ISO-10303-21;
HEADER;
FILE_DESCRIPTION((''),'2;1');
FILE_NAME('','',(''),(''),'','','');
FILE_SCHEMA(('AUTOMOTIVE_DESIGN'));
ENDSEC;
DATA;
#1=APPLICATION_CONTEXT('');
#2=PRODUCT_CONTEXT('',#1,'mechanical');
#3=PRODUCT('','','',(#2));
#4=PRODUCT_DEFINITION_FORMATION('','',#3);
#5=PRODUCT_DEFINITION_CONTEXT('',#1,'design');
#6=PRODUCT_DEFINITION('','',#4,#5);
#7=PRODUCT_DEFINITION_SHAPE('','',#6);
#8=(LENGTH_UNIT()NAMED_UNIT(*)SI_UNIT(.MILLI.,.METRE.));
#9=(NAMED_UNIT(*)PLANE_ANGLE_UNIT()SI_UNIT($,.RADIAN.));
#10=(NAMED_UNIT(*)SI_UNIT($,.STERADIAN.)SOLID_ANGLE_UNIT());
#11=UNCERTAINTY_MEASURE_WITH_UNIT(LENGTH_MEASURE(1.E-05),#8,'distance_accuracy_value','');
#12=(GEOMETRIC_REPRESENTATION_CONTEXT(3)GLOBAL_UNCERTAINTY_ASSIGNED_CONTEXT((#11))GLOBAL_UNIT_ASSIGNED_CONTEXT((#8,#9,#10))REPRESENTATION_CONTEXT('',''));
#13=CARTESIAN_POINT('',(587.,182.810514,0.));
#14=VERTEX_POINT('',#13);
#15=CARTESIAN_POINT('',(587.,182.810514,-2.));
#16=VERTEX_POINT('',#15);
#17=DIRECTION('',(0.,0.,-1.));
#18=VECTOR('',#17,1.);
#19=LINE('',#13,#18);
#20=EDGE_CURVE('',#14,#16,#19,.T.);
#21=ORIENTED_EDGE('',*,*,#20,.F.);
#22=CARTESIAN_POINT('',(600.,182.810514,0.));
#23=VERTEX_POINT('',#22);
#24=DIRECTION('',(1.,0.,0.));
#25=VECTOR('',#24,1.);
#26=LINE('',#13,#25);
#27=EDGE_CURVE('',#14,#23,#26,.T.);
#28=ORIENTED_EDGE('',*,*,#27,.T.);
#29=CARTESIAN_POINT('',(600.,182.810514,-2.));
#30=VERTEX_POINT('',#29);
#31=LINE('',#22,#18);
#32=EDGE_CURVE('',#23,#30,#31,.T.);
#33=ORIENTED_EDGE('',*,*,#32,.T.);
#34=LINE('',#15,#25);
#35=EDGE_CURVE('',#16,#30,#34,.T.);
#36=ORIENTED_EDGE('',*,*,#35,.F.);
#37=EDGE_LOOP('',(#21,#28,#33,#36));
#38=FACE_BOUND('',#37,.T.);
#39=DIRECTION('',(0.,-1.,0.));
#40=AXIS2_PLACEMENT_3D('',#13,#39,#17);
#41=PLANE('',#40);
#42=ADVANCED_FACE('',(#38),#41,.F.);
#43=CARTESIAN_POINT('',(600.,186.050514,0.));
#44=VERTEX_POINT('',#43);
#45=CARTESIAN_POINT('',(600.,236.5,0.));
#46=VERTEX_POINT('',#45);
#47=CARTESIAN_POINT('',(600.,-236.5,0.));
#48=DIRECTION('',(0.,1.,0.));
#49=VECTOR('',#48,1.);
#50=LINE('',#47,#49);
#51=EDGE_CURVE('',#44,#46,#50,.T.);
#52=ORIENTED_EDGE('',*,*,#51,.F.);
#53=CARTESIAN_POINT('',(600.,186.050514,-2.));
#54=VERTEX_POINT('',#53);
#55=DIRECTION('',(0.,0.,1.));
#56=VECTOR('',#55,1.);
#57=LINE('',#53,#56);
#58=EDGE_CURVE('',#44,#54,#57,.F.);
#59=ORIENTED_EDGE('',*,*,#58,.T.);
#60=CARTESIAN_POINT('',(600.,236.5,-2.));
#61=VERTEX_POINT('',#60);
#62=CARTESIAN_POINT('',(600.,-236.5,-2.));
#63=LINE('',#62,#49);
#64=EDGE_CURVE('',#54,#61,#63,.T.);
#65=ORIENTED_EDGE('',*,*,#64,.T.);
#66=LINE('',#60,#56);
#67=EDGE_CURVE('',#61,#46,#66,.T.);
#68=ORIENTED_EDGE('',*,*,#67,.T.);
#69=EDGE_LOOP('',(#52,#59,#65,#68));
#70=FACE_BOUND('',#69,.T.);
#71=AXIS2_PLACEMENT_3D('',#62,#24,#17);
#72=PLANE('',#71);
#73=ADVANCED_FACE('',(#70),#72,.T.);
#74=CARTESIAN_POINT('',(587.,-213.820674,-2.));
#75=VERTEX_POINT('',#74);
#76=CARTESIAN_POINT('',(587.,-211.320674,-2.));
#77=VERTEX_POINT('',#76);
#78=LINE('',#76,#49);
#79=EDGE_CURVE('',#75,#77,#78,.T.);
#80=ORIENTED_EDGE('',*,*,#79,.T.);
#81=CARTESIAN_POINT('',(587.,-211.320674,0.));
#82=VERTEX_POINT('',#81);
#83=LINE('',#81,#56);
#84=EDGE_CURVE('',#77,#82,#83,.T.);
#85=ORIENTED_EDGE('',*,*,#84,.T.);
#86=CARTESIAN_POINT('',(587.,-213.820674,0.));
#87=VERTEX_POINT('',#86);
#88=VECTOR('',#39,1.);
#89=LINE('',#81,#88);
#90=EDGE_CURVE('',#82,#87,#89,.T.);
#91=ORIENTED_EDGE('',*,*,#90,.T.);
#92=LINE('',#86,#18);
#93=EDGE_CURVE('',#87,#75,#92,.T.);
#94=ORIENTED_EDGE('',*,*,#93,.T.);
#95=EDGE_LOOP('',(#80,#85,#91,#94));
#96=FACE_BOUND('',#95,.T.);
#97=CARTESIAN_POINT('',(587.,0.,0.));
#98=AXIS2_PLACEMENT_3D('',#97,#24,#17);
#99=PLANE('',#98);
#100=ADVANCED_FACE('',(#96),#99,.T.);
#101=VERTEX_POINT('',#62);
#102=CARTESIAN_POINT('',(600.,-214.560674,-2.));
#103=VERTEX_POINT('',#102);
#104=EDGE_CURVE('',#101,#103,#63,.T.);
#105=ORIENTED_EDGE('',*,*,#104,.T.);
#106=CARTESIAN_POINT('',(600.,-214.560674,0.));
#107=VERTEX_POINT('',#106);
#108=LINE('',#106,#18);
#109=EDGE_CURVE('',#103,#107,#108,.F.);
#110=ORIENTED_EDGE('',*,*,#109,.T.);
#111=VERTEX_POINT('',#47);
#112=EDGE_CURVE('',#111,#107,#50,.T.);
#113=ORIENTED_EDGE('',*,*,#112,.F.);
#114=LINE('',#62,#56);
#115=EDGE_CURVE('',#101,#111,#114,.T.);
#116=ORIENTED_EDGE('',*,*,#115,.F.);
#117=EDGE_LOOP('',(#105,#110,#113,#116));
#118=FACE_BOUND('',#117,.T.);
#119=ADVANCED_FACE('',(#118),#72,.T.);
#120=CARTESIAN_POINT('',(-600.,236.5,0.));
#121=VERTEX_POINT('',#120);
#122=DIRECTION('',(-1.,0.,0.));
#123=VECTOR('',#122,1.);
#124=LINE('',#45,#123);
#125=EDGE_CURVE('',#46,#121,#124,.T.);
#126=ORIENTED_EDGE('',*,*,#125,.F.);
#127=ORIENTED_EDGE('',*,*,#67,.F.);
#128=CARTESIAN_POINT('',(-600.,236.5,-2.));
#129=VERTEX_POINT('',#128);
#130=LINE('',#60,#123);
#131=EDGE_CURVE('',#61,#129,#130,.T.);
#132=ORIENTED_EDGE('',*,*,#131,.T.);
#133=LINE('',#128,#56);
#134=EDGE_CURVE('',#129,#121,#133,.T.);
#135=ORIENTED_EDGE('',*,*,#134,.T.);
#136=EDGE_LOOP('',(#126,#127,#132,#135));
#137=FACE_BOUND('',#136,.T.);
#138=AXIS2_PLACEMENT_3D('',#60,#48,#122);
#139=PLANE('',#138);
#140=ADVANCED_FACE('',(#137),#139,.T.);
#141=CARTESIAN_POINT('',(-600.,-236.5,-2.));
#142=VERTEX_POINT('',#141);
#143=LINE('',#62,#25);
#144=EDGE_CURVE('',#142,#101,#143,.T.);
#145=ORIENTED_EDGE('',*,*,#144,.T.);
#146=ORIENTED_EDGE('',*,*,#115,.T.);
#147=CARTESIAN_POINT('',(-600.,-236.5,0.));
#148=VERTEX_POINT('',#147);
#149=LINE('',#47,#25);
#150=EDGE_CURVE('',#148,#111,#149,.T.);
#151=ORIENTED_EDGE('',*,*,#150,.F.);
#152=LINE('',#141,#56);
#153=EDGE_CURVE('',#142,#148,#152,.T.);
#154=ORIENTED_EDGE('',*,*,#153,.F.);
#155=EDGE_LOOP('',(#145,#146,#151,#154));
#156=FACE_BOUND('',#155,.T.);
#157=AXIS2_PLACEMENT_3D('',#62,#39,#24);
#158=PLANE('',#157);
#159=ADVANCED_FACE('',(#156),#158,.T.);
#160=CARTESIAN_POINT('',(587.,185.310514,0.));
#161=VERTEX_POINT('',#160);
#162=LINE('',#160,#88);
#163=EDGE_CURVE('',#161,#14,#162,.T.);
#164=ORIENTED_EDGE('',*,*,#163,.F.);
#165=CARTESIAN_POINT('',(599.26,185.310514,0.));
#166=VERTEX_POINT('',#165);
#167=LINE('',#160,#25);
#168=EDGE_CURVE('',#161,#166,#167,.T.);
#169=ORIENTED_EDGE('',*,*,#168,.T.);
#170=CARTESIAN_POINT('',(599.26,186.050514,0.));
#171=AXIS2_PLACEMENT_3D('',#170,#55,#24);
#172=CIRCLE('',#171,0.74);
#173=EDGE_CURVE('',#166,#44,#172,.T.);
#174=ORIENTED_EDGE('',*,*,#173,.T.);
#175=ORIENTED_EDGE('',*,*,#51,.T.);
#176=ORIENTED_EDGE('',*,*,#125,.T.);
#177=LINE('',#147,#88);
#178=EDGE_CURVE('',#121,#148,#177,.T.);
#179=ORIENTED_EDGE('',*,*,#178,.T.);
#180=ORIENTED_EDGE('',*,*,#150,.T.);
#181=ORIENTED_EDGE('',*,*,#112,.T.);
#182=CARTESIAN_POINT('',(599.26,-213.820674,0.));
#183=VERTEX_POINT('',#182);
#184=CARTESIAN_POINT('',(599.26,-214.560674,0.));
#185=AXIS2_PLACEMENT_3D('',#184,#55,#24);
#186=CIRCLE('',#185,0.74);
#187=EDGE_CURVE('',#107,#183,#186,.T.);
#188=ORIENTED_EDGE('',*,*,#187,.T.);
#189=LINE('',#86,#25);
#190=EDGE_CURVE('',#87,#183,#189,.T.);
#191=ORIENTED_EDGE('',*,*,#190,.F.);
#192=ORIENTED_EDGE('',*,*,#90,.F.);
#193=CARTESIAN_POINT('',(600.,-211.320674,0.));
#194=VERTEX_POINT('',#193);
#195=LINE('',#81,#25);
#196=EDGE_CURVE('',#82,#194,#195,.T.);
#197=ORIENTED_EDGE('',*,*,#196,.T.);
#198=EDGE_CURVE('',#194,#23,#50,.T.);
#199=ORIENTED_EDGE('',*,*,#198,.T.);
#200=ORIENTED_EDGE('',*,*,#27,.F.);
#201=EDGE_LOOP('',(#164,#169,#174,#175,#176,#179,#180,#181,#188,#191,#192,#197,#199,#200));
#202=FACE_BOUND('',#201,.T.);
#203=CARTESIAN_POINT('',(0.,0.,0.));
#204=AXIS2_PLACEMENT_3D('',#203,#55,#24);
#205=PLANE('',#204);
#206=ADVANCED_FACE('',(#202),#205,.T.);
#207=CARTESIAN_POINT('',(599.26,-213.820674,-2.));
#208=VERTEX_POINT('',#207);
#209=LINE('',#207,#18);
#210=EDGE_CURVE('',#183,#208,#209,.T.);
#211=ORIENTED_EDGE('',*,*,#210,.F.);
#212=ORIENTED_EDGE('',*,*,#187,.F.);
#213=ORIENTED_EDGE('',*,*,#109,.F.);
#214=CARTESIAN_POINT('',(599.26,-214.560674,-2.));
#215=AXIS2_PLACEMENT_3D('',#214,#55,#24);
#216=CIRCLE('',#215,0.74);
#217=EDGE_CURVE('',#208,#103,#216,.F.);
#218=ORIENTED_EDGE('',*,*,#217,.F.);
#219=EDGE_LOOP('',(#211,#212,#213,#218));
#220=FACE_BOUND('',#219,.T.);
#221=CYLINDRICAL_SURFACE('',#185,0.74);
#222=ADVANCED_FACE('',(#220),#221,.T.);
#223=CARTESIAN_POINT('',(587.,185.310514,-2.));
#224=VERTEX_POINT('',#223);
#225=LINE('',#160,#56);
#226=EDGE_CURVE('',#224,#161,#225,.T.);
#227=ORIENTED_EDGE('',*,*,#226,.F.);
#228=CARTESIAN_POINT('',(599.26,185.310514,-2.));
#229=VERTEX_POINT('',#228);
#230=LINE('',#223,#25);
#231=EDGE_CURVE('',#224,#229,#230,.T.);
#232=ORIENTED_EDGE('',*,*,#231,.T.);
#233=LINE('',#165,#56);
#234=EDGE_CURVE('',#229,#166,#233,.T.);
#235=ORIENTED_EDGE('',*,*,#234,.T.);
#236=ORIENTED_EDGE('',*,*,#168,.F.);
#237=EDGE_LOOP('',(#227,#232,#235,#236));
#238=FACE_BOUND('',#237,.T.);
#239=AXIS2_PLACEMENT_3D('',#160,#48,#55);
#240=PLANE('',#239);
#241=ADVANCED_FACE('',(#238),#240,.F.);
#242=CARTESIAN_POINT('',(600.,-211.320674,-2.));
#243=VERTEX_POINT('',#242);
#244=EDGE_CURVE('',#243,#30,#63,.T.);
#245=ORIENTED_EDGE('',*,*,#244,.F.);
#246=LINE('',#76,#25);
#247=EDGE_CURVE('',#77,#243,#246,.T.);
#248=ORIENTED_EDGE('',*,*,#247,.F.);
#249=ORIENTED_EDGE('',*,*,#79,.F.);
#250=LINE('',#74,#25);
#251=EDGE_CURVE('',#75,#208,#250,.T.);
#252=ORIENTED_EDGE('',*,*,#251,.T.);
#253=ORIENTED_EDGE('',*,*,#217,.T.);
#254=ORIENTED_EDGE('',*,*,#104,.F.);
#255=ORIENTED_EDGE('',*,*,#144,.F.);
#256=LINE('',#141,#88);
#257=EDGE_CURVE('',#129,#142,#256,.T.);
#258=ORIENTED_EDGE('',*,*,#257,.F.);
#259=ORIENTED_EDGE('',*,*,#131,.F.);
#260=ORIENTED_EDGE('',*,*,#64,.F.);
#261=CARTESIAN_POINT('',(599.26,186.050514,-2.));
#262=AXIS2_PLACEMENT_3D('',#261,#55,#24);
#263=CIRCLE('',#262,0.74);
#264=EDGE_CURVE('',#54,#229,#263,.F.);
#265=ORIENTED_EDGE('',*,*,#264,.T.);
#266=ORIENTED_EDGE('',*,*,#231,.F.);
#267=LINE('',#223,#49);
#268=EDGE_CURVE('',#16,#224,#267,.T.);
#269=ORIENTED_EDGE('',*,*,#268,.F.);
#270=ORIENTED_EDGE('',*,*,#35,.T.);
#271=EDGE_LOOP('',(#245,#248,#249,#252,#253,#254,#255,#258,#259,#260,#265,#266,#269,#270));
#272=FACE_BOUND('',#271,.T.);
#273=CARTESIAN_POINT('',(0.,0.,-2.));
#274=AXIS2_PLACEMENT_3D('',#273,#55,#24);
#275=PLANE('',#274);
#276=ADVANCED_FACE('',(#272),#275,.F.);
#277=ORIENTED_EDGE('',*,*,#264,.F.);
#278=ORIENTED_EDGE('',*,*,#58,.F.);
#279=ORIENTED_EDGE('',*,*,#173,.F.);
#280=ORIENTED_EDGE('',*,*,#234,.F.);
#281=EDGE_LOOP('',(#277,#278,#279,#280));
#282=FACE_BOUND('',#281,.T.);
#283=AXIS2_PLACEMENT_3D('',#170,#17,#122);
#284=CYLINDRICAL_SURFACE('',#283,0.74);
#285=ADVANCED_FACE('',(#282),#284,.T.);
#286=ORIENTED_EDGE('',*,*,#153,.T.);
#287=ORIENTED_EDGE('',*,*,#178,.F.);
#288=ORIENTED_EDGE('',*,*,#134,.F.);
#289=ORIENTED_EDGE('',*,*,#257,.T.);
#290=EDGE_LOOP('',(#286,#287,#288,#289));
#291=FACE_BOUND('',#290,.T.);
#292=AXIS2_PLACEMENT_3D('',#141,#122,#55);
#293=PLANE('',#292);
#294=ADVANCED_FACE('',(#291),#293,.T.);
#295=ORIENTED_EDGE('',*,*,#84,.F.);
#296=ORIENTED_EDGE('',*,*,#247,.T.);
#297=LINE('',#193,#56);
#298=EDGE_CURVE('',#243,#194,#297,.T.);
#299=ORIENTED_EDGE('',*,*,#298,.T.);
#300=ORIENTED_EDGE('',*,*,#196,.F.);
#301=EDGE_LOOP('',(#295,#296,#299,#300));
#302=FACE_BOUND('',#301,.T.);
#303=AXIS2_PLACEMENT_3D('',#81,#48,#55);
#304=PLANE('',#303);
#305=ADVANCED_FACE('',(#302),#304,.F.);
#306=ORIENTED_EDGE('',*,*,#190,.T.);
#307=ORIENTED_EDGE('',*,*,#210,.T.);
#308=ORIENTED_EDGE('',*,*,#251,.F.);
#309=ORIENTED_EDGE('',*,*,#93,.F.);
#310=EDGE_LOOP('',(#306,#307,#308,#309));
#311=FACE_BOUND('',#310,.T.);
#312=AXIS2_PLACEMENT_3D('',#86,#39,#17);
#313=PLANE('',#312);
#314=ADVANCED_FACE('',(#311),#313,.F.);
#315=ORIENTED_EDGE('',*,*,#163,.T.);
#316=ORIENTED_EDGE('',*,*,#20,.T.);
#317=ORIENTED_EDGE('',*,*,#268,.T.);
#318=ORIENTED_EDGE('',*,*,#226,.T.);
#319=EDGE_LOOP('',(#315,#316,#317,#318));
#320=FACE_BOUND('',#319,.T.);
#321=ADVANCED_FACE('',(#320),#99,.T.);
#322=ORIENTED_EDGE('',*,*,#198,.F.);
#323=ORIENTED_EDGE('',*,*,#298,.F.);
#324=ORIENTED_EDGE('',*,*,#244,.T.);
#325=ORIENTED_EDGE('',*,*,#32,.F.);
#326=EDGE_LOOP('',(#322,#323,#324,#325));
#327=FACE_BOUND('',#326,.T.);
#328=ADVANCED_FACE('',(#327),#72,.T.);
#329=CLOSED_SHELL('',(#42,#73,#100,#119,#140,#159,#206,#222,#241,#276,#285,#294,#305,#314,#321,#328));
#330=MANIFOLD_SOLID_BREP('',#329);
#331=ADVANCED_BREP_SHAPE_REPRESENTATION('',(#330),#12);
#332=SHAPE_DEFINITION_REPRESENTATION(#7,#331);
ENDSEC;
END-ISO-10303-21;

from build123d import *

# Parameters (mm, degrees)
SKETCH1_W          = 1200
SKETCH1_H          = 473
BASE_FLANGE1_DEPTH = 2
SKETCH2_W          = 2
SKETCH2_H          = 2.5
CUT_EXTRUDE1_DEPTH = 13
FILLET1_R          = 0.74


# Sheet-metal steps are written as plain solids
with BuildPart() as part:
    # Sketch1 → Base-Flange1 (new body)
    with BuildSketch(Plane.XY):
        Rectangle(SKETCH1_W, SKETCH1_H)
    extrude(amount=-BASE_FLANGE1_DEPTH)

    # Sketch2 → Cut-Extrude1 (cut)
    with BuildSketch(Plane(origin=(600, 0, 0), x_dir=(0, 0, -1), z_dir=(1, 0, 0))):
        with Locations((1, 184.060514082)):
            Rectangle(SKETCH2_W, SKETCH2_H)
        with Locations((1, -212.570674279)):
            Rectangle(SKETCH2_W, SKETCH2_H)
    extrude(amount=-CUT_EXTRUDE1_DEPTH, mode=Mode.SUBTRACT)

    # Fillet1
    fillet1_edges = [part.edges().sort_by_distance(p)[0] for p in [
        (600, 185.310514082, -1),
        (600, -213.820674279, -1),
    ]]
    fillet(fillet1_edges, radius=FILLET1_R)


solid = part.part
